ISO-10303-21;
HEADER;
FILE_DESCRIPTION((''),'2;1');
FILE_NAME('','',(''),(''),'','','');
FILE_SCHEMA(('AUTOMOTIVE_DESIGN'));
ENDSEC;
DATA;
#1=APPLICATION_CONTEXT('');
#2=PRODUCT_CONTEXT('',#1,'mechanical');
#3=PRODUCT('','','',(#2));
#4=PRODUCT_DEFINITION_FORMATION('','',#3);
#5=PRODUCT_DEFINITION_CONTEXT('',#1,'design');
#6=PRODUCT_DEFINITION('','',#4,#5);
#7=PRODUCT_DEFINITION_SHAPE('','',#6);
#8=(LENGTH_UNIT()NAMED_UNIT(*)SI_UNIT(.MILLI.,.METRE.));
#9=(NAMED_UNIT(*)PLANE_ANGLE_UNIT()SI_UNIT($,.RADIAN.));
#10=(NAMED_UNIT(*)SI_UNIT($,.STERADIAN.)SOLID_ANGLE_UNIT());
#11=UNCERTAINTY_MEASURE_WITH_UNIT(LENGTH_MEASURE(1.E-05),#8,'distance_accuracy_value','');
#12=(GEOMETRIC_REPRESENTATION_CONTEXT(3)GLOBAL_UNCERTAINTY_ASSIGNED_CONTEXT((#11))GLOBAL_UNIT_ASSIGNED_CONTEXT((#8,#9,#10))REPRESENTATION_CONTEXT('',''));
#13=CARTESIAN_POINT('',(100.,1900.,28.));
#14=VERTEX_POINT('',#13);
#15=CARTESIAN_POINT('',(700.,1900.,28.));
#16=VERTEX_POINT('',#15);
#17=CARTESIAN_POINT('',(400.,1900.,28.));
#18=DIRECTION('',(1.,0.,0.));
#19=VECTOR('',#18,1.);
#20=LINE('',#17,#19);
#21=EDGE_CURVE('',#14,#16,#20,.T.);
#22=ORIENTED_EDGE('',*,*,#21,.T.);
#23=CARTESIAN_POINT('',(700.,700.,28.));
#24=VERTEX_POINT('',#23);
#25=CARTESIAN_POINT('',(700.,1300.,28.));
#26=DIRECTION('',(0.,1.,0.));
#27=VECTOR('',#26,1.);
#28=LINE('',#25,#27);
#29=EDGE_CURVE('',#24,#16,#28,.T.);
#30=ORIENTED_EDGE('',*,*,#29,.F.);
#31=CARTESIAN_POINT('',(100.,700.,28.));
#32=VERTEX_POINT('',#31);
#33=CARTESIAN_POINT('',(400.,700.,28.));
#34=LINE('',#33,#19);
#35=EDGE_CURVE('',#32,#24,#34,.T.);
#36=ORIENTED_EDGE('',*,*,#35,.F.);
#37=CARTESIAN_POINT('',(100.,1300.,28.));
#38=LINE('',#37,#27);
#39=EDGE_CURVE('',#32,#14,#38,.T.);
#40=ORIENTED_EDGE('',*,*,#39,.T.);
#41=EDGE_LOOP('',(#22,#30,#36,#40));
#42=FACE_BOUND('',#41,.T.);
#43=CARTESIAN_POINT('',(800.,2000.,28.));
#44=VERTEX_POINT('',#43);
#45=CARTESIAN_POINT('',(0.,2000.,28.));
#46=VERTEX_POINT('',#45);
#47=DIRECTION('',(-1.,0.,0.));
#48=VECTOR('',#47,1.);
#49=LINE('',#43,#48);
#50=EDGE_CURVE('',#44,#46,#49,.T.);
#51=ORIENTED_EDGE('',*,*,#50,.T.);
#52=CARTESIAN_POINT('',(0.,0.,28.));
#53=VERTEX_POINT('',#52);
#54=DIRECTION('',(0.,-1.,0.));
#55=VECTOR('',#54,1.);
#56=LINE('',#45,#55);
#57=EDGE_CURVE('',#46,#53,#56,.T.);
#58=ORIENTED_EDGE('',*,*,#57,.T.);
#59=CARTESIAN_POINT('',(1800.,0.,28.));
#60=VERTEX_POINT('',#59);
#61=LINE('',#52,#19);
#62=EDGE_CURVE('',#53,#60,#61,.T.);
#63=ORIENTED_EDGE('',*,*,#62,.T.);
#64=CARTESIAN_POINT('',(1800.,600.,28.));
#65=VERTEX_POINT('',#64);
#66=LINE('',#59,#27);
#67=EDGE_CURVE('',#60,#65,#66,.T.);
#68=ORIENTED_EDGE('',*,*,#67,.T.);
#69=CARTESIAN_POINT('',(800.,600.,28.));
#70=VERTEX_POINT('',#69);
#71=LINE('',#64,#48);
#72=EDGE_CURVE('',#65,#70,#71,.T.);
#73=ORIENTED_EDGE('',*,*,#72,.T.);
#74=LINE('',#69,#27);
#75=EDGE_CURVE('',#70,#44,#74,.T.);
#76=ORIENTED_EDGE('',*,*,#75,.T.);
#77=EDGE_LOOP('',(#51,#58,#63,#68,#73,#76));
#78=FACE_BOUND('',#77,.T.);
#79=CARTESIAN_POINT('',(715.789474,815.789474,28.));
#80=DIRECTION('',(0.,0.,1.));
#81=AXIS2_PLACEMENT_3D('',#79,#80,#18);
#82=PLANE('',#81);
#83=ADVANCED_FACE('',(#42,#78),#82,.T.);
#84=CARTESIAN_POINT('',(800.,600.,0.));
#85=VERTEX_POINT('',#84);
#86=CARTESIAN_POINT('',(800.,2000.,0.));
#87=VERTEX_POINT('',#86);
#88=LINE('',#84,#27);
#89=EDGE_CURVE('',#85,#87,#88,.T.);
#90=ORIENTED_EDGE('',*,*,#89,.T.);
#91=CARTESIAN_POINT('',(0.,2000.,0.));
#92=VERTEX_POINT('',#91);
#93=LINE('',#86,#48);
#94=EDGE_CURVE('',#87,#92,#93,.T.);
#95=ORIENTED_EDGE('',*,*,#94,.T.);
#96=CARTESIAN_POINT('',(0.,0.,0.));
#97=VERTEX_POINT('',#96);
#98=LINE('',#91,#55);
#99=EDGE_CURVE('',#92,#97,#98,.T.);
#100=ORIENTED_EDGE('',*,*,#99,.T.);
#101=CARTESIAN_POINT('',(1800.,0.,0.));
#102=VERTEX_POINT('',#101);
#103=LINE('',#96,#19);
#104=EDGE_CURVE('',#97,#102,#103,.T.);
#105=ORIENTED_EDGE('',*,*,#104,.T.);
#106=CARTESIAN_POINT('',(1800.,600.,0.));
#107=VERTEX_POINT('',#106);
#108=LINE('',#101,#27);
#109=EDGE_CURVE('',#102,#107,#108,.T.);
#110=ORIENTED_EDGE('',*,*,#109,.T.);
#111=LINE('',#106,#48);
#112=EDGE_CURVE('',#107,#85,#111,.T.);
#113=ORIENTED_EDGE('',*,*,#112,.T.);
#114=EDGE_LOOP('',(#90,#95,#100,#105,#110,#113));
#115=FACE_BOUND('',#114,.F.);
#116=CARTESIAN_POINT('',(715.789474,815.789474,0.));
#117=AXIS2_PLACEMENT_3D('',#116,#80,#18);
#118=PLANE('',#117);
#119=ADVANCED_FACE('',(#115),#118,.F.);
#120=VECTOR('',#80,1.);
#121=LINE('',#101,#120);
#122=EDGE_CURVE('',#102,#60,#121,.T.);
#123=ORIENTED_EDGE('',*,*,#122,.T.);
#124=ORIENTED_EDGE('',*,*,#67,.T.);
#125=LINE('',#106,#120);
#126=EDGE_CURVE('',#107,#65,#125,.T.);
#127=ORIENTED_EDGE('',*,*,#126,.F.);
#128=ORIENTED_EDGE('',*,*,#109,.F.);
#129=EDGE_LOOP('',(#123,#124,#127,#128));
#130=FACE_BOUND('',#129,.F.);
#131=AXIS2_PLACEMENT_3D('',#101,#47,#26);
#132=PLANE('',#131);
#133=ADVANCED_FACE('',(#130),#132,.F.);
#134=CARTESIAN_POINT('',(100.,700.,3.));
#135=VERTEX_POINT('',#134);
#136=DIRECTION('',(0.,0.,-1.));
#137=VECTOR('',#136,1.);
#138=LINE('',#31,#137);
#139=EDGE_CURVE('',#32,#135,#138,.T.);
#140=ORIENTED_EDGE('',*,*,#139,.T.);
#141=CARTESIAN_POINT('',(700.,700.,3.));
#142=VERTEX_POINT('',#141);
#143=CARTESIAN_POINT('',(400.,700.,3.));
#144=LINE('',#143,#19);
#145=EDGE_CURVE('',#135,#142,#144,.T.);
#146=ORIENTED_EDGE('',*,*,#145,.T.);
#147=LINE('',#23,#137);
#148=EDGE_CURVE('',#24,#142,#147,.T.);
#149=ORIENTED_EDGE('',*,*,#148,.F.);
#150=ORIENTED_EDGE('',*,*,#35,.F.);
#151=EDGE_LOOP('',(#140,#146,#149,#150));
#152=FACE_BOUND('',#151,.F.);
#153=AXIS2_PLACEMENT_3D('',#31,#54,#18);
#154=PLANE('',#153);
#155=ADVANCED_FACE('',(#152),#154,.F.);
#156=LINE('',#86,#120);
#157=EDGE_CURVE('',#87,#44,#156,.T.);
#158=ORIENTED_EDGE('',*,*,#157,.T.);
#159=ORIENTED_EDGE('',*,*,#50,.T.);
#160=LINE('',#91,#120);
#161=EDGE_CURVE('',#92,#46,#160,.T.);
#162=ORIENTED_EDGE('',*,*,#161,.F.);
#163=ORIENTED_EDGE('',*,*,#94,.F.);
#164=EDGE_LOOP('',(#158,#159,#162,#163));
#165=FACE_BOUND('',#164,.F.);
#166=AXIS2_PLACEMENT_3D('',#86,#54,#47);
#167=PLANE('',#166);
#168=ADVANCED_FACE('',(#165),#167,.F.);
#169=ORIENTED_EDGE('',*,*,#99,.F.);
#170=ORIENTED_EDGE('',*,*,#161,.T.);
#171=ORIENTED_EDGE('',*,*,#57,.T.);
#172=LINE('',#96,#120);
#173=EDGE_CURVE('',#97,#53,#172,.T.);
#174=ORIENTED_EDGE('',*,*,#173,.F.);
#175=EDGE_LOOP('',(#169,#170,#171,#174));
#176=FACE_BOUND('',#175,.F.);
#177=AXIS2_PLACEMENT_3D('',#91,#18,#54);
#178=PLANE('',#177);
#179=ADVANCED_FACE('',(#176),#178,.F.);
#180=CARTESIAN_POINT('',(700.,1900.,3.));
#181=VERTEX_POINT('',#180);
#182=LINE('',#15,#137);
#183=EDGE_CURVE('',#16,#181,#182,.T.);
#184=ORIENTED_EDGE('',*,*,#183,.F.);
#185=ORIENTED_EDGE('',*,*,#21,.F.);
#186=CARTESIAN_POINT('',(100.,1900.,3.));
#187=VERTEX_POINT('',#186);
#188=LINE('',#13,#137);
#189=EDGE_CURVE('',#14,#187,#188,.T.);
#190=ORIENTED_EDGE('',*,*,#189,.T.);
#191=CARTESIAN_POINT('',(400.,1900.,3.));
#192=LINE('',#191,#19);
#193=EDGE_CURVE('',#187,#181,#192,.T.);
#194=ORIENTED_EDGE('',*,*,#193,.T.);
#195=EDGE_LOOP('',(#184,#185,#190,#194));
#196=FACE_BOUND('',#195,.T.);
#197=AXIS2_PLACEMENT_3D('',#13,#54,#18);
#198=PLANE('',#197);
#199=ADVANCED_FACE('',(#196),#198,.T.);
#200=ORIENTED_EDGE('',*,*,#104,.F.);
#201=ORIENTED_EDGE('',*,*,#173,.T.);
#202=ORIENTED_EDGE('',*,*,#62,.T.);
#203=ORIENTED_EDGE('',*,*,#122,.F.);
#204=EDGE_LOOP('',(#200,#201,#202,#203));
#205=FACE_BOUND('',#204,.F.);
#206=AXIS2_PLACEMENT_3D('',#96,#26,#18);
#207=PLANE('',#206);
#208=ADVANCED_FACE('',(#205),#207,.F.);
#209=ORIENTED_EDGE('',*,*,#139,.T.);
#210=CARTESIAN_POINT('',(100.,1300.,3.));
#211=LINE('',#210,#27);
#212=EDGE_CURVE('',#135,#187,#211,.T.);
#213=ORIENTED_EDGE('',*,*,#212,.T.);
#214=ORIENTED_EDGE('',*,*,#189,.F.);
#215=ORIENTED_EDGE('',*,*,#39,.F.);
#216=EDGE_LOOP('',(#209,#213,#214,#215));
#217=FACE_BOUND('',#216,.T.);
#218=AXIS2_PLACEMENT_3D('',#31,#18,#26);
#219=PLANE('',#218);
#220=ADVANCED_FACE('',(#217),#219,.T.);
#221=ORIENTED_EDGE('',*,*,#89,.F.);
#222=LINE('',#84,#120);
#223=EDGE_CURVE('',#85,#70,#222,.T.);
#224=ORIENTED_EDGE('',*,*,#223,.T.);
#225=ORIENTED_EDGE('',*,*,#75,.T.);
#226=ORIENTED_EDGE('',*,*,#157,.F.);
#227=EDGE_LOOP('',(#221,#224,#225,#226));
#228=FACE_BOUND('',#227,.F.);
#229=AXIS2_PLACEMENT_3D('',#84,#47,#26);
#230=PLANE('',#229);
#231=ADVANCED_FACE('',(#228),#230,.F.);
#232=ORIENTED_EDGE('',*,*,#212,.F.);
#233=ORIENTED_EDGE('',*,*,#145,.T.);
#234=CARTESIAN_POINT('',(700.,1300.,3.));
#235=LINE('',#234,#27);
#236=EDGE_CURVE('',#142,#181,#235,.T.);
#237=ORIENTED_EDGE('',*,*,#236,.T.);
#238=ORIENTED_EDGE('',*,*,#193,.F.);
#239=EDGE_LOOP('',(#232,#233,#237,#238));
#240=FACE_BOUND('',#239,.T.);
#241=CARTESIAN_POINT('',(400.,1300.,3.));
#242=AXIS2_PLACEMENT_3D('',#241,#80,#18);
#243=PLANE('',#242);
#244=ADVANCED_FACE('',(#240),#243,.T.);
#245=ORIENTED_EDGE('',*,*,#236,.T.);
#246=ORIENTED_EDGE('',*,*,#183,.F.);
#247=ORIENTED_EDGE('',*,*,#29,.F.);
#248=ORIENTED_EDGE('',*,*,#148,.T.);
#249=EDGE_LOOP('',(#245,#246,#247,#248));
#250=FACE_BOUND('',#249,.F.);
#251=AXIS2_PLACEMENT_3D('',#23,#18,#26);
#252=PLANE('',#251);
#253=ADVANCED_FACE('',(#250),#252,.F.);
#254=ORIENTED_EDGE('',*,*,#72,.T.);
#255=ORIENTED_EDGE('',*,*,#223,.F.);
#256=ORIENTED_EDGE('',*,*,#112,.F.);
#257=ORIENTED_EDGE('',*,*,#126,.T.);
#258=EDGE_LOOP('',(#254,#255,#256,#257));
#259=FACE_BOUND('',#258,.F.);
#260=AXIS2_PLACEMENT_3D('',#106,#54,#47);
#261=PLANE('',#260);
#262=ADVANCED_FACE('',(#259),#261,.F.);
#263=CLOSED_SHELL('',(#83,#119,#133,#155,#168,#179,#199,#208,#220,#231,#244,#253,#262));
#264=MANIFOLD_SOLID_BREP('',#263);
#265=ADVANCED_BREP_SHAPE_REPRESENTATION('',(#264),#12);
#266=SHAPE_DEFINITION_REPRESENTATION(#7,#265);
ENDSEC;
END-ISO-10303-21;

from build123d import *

# Parameters (mm, degrees)
F1_DEPTH = 28
F2_W     = 600
F2_H     = 1200
F3_DEPTH = 25


# Not quite as in the source:
# - the program builds the solid bodies; features that only make, move or delete a surface that nothing else refers to are left out


with BuildPart() as f1:
    # F0 (on Top) → F1 (new body)
    with BuildSketch(Plane.XY):
        Polygon((0, 2000), (0, 0), (1800, 0), (1800, 600), (800, 600), (800, 2000), align=None)
    extrude(amount=F1_DEPTH)

    # F2 (on face) → F3 (cut)
    with BuildSketch(Plane.XY.offset(28)):
        with Locations((400, 1300)):
            Rectangle(F2_W, F2_H)
    extrude(amount=-F3_DEPTH, mode=Mode.SUBTRACT)


solid = f1.part
